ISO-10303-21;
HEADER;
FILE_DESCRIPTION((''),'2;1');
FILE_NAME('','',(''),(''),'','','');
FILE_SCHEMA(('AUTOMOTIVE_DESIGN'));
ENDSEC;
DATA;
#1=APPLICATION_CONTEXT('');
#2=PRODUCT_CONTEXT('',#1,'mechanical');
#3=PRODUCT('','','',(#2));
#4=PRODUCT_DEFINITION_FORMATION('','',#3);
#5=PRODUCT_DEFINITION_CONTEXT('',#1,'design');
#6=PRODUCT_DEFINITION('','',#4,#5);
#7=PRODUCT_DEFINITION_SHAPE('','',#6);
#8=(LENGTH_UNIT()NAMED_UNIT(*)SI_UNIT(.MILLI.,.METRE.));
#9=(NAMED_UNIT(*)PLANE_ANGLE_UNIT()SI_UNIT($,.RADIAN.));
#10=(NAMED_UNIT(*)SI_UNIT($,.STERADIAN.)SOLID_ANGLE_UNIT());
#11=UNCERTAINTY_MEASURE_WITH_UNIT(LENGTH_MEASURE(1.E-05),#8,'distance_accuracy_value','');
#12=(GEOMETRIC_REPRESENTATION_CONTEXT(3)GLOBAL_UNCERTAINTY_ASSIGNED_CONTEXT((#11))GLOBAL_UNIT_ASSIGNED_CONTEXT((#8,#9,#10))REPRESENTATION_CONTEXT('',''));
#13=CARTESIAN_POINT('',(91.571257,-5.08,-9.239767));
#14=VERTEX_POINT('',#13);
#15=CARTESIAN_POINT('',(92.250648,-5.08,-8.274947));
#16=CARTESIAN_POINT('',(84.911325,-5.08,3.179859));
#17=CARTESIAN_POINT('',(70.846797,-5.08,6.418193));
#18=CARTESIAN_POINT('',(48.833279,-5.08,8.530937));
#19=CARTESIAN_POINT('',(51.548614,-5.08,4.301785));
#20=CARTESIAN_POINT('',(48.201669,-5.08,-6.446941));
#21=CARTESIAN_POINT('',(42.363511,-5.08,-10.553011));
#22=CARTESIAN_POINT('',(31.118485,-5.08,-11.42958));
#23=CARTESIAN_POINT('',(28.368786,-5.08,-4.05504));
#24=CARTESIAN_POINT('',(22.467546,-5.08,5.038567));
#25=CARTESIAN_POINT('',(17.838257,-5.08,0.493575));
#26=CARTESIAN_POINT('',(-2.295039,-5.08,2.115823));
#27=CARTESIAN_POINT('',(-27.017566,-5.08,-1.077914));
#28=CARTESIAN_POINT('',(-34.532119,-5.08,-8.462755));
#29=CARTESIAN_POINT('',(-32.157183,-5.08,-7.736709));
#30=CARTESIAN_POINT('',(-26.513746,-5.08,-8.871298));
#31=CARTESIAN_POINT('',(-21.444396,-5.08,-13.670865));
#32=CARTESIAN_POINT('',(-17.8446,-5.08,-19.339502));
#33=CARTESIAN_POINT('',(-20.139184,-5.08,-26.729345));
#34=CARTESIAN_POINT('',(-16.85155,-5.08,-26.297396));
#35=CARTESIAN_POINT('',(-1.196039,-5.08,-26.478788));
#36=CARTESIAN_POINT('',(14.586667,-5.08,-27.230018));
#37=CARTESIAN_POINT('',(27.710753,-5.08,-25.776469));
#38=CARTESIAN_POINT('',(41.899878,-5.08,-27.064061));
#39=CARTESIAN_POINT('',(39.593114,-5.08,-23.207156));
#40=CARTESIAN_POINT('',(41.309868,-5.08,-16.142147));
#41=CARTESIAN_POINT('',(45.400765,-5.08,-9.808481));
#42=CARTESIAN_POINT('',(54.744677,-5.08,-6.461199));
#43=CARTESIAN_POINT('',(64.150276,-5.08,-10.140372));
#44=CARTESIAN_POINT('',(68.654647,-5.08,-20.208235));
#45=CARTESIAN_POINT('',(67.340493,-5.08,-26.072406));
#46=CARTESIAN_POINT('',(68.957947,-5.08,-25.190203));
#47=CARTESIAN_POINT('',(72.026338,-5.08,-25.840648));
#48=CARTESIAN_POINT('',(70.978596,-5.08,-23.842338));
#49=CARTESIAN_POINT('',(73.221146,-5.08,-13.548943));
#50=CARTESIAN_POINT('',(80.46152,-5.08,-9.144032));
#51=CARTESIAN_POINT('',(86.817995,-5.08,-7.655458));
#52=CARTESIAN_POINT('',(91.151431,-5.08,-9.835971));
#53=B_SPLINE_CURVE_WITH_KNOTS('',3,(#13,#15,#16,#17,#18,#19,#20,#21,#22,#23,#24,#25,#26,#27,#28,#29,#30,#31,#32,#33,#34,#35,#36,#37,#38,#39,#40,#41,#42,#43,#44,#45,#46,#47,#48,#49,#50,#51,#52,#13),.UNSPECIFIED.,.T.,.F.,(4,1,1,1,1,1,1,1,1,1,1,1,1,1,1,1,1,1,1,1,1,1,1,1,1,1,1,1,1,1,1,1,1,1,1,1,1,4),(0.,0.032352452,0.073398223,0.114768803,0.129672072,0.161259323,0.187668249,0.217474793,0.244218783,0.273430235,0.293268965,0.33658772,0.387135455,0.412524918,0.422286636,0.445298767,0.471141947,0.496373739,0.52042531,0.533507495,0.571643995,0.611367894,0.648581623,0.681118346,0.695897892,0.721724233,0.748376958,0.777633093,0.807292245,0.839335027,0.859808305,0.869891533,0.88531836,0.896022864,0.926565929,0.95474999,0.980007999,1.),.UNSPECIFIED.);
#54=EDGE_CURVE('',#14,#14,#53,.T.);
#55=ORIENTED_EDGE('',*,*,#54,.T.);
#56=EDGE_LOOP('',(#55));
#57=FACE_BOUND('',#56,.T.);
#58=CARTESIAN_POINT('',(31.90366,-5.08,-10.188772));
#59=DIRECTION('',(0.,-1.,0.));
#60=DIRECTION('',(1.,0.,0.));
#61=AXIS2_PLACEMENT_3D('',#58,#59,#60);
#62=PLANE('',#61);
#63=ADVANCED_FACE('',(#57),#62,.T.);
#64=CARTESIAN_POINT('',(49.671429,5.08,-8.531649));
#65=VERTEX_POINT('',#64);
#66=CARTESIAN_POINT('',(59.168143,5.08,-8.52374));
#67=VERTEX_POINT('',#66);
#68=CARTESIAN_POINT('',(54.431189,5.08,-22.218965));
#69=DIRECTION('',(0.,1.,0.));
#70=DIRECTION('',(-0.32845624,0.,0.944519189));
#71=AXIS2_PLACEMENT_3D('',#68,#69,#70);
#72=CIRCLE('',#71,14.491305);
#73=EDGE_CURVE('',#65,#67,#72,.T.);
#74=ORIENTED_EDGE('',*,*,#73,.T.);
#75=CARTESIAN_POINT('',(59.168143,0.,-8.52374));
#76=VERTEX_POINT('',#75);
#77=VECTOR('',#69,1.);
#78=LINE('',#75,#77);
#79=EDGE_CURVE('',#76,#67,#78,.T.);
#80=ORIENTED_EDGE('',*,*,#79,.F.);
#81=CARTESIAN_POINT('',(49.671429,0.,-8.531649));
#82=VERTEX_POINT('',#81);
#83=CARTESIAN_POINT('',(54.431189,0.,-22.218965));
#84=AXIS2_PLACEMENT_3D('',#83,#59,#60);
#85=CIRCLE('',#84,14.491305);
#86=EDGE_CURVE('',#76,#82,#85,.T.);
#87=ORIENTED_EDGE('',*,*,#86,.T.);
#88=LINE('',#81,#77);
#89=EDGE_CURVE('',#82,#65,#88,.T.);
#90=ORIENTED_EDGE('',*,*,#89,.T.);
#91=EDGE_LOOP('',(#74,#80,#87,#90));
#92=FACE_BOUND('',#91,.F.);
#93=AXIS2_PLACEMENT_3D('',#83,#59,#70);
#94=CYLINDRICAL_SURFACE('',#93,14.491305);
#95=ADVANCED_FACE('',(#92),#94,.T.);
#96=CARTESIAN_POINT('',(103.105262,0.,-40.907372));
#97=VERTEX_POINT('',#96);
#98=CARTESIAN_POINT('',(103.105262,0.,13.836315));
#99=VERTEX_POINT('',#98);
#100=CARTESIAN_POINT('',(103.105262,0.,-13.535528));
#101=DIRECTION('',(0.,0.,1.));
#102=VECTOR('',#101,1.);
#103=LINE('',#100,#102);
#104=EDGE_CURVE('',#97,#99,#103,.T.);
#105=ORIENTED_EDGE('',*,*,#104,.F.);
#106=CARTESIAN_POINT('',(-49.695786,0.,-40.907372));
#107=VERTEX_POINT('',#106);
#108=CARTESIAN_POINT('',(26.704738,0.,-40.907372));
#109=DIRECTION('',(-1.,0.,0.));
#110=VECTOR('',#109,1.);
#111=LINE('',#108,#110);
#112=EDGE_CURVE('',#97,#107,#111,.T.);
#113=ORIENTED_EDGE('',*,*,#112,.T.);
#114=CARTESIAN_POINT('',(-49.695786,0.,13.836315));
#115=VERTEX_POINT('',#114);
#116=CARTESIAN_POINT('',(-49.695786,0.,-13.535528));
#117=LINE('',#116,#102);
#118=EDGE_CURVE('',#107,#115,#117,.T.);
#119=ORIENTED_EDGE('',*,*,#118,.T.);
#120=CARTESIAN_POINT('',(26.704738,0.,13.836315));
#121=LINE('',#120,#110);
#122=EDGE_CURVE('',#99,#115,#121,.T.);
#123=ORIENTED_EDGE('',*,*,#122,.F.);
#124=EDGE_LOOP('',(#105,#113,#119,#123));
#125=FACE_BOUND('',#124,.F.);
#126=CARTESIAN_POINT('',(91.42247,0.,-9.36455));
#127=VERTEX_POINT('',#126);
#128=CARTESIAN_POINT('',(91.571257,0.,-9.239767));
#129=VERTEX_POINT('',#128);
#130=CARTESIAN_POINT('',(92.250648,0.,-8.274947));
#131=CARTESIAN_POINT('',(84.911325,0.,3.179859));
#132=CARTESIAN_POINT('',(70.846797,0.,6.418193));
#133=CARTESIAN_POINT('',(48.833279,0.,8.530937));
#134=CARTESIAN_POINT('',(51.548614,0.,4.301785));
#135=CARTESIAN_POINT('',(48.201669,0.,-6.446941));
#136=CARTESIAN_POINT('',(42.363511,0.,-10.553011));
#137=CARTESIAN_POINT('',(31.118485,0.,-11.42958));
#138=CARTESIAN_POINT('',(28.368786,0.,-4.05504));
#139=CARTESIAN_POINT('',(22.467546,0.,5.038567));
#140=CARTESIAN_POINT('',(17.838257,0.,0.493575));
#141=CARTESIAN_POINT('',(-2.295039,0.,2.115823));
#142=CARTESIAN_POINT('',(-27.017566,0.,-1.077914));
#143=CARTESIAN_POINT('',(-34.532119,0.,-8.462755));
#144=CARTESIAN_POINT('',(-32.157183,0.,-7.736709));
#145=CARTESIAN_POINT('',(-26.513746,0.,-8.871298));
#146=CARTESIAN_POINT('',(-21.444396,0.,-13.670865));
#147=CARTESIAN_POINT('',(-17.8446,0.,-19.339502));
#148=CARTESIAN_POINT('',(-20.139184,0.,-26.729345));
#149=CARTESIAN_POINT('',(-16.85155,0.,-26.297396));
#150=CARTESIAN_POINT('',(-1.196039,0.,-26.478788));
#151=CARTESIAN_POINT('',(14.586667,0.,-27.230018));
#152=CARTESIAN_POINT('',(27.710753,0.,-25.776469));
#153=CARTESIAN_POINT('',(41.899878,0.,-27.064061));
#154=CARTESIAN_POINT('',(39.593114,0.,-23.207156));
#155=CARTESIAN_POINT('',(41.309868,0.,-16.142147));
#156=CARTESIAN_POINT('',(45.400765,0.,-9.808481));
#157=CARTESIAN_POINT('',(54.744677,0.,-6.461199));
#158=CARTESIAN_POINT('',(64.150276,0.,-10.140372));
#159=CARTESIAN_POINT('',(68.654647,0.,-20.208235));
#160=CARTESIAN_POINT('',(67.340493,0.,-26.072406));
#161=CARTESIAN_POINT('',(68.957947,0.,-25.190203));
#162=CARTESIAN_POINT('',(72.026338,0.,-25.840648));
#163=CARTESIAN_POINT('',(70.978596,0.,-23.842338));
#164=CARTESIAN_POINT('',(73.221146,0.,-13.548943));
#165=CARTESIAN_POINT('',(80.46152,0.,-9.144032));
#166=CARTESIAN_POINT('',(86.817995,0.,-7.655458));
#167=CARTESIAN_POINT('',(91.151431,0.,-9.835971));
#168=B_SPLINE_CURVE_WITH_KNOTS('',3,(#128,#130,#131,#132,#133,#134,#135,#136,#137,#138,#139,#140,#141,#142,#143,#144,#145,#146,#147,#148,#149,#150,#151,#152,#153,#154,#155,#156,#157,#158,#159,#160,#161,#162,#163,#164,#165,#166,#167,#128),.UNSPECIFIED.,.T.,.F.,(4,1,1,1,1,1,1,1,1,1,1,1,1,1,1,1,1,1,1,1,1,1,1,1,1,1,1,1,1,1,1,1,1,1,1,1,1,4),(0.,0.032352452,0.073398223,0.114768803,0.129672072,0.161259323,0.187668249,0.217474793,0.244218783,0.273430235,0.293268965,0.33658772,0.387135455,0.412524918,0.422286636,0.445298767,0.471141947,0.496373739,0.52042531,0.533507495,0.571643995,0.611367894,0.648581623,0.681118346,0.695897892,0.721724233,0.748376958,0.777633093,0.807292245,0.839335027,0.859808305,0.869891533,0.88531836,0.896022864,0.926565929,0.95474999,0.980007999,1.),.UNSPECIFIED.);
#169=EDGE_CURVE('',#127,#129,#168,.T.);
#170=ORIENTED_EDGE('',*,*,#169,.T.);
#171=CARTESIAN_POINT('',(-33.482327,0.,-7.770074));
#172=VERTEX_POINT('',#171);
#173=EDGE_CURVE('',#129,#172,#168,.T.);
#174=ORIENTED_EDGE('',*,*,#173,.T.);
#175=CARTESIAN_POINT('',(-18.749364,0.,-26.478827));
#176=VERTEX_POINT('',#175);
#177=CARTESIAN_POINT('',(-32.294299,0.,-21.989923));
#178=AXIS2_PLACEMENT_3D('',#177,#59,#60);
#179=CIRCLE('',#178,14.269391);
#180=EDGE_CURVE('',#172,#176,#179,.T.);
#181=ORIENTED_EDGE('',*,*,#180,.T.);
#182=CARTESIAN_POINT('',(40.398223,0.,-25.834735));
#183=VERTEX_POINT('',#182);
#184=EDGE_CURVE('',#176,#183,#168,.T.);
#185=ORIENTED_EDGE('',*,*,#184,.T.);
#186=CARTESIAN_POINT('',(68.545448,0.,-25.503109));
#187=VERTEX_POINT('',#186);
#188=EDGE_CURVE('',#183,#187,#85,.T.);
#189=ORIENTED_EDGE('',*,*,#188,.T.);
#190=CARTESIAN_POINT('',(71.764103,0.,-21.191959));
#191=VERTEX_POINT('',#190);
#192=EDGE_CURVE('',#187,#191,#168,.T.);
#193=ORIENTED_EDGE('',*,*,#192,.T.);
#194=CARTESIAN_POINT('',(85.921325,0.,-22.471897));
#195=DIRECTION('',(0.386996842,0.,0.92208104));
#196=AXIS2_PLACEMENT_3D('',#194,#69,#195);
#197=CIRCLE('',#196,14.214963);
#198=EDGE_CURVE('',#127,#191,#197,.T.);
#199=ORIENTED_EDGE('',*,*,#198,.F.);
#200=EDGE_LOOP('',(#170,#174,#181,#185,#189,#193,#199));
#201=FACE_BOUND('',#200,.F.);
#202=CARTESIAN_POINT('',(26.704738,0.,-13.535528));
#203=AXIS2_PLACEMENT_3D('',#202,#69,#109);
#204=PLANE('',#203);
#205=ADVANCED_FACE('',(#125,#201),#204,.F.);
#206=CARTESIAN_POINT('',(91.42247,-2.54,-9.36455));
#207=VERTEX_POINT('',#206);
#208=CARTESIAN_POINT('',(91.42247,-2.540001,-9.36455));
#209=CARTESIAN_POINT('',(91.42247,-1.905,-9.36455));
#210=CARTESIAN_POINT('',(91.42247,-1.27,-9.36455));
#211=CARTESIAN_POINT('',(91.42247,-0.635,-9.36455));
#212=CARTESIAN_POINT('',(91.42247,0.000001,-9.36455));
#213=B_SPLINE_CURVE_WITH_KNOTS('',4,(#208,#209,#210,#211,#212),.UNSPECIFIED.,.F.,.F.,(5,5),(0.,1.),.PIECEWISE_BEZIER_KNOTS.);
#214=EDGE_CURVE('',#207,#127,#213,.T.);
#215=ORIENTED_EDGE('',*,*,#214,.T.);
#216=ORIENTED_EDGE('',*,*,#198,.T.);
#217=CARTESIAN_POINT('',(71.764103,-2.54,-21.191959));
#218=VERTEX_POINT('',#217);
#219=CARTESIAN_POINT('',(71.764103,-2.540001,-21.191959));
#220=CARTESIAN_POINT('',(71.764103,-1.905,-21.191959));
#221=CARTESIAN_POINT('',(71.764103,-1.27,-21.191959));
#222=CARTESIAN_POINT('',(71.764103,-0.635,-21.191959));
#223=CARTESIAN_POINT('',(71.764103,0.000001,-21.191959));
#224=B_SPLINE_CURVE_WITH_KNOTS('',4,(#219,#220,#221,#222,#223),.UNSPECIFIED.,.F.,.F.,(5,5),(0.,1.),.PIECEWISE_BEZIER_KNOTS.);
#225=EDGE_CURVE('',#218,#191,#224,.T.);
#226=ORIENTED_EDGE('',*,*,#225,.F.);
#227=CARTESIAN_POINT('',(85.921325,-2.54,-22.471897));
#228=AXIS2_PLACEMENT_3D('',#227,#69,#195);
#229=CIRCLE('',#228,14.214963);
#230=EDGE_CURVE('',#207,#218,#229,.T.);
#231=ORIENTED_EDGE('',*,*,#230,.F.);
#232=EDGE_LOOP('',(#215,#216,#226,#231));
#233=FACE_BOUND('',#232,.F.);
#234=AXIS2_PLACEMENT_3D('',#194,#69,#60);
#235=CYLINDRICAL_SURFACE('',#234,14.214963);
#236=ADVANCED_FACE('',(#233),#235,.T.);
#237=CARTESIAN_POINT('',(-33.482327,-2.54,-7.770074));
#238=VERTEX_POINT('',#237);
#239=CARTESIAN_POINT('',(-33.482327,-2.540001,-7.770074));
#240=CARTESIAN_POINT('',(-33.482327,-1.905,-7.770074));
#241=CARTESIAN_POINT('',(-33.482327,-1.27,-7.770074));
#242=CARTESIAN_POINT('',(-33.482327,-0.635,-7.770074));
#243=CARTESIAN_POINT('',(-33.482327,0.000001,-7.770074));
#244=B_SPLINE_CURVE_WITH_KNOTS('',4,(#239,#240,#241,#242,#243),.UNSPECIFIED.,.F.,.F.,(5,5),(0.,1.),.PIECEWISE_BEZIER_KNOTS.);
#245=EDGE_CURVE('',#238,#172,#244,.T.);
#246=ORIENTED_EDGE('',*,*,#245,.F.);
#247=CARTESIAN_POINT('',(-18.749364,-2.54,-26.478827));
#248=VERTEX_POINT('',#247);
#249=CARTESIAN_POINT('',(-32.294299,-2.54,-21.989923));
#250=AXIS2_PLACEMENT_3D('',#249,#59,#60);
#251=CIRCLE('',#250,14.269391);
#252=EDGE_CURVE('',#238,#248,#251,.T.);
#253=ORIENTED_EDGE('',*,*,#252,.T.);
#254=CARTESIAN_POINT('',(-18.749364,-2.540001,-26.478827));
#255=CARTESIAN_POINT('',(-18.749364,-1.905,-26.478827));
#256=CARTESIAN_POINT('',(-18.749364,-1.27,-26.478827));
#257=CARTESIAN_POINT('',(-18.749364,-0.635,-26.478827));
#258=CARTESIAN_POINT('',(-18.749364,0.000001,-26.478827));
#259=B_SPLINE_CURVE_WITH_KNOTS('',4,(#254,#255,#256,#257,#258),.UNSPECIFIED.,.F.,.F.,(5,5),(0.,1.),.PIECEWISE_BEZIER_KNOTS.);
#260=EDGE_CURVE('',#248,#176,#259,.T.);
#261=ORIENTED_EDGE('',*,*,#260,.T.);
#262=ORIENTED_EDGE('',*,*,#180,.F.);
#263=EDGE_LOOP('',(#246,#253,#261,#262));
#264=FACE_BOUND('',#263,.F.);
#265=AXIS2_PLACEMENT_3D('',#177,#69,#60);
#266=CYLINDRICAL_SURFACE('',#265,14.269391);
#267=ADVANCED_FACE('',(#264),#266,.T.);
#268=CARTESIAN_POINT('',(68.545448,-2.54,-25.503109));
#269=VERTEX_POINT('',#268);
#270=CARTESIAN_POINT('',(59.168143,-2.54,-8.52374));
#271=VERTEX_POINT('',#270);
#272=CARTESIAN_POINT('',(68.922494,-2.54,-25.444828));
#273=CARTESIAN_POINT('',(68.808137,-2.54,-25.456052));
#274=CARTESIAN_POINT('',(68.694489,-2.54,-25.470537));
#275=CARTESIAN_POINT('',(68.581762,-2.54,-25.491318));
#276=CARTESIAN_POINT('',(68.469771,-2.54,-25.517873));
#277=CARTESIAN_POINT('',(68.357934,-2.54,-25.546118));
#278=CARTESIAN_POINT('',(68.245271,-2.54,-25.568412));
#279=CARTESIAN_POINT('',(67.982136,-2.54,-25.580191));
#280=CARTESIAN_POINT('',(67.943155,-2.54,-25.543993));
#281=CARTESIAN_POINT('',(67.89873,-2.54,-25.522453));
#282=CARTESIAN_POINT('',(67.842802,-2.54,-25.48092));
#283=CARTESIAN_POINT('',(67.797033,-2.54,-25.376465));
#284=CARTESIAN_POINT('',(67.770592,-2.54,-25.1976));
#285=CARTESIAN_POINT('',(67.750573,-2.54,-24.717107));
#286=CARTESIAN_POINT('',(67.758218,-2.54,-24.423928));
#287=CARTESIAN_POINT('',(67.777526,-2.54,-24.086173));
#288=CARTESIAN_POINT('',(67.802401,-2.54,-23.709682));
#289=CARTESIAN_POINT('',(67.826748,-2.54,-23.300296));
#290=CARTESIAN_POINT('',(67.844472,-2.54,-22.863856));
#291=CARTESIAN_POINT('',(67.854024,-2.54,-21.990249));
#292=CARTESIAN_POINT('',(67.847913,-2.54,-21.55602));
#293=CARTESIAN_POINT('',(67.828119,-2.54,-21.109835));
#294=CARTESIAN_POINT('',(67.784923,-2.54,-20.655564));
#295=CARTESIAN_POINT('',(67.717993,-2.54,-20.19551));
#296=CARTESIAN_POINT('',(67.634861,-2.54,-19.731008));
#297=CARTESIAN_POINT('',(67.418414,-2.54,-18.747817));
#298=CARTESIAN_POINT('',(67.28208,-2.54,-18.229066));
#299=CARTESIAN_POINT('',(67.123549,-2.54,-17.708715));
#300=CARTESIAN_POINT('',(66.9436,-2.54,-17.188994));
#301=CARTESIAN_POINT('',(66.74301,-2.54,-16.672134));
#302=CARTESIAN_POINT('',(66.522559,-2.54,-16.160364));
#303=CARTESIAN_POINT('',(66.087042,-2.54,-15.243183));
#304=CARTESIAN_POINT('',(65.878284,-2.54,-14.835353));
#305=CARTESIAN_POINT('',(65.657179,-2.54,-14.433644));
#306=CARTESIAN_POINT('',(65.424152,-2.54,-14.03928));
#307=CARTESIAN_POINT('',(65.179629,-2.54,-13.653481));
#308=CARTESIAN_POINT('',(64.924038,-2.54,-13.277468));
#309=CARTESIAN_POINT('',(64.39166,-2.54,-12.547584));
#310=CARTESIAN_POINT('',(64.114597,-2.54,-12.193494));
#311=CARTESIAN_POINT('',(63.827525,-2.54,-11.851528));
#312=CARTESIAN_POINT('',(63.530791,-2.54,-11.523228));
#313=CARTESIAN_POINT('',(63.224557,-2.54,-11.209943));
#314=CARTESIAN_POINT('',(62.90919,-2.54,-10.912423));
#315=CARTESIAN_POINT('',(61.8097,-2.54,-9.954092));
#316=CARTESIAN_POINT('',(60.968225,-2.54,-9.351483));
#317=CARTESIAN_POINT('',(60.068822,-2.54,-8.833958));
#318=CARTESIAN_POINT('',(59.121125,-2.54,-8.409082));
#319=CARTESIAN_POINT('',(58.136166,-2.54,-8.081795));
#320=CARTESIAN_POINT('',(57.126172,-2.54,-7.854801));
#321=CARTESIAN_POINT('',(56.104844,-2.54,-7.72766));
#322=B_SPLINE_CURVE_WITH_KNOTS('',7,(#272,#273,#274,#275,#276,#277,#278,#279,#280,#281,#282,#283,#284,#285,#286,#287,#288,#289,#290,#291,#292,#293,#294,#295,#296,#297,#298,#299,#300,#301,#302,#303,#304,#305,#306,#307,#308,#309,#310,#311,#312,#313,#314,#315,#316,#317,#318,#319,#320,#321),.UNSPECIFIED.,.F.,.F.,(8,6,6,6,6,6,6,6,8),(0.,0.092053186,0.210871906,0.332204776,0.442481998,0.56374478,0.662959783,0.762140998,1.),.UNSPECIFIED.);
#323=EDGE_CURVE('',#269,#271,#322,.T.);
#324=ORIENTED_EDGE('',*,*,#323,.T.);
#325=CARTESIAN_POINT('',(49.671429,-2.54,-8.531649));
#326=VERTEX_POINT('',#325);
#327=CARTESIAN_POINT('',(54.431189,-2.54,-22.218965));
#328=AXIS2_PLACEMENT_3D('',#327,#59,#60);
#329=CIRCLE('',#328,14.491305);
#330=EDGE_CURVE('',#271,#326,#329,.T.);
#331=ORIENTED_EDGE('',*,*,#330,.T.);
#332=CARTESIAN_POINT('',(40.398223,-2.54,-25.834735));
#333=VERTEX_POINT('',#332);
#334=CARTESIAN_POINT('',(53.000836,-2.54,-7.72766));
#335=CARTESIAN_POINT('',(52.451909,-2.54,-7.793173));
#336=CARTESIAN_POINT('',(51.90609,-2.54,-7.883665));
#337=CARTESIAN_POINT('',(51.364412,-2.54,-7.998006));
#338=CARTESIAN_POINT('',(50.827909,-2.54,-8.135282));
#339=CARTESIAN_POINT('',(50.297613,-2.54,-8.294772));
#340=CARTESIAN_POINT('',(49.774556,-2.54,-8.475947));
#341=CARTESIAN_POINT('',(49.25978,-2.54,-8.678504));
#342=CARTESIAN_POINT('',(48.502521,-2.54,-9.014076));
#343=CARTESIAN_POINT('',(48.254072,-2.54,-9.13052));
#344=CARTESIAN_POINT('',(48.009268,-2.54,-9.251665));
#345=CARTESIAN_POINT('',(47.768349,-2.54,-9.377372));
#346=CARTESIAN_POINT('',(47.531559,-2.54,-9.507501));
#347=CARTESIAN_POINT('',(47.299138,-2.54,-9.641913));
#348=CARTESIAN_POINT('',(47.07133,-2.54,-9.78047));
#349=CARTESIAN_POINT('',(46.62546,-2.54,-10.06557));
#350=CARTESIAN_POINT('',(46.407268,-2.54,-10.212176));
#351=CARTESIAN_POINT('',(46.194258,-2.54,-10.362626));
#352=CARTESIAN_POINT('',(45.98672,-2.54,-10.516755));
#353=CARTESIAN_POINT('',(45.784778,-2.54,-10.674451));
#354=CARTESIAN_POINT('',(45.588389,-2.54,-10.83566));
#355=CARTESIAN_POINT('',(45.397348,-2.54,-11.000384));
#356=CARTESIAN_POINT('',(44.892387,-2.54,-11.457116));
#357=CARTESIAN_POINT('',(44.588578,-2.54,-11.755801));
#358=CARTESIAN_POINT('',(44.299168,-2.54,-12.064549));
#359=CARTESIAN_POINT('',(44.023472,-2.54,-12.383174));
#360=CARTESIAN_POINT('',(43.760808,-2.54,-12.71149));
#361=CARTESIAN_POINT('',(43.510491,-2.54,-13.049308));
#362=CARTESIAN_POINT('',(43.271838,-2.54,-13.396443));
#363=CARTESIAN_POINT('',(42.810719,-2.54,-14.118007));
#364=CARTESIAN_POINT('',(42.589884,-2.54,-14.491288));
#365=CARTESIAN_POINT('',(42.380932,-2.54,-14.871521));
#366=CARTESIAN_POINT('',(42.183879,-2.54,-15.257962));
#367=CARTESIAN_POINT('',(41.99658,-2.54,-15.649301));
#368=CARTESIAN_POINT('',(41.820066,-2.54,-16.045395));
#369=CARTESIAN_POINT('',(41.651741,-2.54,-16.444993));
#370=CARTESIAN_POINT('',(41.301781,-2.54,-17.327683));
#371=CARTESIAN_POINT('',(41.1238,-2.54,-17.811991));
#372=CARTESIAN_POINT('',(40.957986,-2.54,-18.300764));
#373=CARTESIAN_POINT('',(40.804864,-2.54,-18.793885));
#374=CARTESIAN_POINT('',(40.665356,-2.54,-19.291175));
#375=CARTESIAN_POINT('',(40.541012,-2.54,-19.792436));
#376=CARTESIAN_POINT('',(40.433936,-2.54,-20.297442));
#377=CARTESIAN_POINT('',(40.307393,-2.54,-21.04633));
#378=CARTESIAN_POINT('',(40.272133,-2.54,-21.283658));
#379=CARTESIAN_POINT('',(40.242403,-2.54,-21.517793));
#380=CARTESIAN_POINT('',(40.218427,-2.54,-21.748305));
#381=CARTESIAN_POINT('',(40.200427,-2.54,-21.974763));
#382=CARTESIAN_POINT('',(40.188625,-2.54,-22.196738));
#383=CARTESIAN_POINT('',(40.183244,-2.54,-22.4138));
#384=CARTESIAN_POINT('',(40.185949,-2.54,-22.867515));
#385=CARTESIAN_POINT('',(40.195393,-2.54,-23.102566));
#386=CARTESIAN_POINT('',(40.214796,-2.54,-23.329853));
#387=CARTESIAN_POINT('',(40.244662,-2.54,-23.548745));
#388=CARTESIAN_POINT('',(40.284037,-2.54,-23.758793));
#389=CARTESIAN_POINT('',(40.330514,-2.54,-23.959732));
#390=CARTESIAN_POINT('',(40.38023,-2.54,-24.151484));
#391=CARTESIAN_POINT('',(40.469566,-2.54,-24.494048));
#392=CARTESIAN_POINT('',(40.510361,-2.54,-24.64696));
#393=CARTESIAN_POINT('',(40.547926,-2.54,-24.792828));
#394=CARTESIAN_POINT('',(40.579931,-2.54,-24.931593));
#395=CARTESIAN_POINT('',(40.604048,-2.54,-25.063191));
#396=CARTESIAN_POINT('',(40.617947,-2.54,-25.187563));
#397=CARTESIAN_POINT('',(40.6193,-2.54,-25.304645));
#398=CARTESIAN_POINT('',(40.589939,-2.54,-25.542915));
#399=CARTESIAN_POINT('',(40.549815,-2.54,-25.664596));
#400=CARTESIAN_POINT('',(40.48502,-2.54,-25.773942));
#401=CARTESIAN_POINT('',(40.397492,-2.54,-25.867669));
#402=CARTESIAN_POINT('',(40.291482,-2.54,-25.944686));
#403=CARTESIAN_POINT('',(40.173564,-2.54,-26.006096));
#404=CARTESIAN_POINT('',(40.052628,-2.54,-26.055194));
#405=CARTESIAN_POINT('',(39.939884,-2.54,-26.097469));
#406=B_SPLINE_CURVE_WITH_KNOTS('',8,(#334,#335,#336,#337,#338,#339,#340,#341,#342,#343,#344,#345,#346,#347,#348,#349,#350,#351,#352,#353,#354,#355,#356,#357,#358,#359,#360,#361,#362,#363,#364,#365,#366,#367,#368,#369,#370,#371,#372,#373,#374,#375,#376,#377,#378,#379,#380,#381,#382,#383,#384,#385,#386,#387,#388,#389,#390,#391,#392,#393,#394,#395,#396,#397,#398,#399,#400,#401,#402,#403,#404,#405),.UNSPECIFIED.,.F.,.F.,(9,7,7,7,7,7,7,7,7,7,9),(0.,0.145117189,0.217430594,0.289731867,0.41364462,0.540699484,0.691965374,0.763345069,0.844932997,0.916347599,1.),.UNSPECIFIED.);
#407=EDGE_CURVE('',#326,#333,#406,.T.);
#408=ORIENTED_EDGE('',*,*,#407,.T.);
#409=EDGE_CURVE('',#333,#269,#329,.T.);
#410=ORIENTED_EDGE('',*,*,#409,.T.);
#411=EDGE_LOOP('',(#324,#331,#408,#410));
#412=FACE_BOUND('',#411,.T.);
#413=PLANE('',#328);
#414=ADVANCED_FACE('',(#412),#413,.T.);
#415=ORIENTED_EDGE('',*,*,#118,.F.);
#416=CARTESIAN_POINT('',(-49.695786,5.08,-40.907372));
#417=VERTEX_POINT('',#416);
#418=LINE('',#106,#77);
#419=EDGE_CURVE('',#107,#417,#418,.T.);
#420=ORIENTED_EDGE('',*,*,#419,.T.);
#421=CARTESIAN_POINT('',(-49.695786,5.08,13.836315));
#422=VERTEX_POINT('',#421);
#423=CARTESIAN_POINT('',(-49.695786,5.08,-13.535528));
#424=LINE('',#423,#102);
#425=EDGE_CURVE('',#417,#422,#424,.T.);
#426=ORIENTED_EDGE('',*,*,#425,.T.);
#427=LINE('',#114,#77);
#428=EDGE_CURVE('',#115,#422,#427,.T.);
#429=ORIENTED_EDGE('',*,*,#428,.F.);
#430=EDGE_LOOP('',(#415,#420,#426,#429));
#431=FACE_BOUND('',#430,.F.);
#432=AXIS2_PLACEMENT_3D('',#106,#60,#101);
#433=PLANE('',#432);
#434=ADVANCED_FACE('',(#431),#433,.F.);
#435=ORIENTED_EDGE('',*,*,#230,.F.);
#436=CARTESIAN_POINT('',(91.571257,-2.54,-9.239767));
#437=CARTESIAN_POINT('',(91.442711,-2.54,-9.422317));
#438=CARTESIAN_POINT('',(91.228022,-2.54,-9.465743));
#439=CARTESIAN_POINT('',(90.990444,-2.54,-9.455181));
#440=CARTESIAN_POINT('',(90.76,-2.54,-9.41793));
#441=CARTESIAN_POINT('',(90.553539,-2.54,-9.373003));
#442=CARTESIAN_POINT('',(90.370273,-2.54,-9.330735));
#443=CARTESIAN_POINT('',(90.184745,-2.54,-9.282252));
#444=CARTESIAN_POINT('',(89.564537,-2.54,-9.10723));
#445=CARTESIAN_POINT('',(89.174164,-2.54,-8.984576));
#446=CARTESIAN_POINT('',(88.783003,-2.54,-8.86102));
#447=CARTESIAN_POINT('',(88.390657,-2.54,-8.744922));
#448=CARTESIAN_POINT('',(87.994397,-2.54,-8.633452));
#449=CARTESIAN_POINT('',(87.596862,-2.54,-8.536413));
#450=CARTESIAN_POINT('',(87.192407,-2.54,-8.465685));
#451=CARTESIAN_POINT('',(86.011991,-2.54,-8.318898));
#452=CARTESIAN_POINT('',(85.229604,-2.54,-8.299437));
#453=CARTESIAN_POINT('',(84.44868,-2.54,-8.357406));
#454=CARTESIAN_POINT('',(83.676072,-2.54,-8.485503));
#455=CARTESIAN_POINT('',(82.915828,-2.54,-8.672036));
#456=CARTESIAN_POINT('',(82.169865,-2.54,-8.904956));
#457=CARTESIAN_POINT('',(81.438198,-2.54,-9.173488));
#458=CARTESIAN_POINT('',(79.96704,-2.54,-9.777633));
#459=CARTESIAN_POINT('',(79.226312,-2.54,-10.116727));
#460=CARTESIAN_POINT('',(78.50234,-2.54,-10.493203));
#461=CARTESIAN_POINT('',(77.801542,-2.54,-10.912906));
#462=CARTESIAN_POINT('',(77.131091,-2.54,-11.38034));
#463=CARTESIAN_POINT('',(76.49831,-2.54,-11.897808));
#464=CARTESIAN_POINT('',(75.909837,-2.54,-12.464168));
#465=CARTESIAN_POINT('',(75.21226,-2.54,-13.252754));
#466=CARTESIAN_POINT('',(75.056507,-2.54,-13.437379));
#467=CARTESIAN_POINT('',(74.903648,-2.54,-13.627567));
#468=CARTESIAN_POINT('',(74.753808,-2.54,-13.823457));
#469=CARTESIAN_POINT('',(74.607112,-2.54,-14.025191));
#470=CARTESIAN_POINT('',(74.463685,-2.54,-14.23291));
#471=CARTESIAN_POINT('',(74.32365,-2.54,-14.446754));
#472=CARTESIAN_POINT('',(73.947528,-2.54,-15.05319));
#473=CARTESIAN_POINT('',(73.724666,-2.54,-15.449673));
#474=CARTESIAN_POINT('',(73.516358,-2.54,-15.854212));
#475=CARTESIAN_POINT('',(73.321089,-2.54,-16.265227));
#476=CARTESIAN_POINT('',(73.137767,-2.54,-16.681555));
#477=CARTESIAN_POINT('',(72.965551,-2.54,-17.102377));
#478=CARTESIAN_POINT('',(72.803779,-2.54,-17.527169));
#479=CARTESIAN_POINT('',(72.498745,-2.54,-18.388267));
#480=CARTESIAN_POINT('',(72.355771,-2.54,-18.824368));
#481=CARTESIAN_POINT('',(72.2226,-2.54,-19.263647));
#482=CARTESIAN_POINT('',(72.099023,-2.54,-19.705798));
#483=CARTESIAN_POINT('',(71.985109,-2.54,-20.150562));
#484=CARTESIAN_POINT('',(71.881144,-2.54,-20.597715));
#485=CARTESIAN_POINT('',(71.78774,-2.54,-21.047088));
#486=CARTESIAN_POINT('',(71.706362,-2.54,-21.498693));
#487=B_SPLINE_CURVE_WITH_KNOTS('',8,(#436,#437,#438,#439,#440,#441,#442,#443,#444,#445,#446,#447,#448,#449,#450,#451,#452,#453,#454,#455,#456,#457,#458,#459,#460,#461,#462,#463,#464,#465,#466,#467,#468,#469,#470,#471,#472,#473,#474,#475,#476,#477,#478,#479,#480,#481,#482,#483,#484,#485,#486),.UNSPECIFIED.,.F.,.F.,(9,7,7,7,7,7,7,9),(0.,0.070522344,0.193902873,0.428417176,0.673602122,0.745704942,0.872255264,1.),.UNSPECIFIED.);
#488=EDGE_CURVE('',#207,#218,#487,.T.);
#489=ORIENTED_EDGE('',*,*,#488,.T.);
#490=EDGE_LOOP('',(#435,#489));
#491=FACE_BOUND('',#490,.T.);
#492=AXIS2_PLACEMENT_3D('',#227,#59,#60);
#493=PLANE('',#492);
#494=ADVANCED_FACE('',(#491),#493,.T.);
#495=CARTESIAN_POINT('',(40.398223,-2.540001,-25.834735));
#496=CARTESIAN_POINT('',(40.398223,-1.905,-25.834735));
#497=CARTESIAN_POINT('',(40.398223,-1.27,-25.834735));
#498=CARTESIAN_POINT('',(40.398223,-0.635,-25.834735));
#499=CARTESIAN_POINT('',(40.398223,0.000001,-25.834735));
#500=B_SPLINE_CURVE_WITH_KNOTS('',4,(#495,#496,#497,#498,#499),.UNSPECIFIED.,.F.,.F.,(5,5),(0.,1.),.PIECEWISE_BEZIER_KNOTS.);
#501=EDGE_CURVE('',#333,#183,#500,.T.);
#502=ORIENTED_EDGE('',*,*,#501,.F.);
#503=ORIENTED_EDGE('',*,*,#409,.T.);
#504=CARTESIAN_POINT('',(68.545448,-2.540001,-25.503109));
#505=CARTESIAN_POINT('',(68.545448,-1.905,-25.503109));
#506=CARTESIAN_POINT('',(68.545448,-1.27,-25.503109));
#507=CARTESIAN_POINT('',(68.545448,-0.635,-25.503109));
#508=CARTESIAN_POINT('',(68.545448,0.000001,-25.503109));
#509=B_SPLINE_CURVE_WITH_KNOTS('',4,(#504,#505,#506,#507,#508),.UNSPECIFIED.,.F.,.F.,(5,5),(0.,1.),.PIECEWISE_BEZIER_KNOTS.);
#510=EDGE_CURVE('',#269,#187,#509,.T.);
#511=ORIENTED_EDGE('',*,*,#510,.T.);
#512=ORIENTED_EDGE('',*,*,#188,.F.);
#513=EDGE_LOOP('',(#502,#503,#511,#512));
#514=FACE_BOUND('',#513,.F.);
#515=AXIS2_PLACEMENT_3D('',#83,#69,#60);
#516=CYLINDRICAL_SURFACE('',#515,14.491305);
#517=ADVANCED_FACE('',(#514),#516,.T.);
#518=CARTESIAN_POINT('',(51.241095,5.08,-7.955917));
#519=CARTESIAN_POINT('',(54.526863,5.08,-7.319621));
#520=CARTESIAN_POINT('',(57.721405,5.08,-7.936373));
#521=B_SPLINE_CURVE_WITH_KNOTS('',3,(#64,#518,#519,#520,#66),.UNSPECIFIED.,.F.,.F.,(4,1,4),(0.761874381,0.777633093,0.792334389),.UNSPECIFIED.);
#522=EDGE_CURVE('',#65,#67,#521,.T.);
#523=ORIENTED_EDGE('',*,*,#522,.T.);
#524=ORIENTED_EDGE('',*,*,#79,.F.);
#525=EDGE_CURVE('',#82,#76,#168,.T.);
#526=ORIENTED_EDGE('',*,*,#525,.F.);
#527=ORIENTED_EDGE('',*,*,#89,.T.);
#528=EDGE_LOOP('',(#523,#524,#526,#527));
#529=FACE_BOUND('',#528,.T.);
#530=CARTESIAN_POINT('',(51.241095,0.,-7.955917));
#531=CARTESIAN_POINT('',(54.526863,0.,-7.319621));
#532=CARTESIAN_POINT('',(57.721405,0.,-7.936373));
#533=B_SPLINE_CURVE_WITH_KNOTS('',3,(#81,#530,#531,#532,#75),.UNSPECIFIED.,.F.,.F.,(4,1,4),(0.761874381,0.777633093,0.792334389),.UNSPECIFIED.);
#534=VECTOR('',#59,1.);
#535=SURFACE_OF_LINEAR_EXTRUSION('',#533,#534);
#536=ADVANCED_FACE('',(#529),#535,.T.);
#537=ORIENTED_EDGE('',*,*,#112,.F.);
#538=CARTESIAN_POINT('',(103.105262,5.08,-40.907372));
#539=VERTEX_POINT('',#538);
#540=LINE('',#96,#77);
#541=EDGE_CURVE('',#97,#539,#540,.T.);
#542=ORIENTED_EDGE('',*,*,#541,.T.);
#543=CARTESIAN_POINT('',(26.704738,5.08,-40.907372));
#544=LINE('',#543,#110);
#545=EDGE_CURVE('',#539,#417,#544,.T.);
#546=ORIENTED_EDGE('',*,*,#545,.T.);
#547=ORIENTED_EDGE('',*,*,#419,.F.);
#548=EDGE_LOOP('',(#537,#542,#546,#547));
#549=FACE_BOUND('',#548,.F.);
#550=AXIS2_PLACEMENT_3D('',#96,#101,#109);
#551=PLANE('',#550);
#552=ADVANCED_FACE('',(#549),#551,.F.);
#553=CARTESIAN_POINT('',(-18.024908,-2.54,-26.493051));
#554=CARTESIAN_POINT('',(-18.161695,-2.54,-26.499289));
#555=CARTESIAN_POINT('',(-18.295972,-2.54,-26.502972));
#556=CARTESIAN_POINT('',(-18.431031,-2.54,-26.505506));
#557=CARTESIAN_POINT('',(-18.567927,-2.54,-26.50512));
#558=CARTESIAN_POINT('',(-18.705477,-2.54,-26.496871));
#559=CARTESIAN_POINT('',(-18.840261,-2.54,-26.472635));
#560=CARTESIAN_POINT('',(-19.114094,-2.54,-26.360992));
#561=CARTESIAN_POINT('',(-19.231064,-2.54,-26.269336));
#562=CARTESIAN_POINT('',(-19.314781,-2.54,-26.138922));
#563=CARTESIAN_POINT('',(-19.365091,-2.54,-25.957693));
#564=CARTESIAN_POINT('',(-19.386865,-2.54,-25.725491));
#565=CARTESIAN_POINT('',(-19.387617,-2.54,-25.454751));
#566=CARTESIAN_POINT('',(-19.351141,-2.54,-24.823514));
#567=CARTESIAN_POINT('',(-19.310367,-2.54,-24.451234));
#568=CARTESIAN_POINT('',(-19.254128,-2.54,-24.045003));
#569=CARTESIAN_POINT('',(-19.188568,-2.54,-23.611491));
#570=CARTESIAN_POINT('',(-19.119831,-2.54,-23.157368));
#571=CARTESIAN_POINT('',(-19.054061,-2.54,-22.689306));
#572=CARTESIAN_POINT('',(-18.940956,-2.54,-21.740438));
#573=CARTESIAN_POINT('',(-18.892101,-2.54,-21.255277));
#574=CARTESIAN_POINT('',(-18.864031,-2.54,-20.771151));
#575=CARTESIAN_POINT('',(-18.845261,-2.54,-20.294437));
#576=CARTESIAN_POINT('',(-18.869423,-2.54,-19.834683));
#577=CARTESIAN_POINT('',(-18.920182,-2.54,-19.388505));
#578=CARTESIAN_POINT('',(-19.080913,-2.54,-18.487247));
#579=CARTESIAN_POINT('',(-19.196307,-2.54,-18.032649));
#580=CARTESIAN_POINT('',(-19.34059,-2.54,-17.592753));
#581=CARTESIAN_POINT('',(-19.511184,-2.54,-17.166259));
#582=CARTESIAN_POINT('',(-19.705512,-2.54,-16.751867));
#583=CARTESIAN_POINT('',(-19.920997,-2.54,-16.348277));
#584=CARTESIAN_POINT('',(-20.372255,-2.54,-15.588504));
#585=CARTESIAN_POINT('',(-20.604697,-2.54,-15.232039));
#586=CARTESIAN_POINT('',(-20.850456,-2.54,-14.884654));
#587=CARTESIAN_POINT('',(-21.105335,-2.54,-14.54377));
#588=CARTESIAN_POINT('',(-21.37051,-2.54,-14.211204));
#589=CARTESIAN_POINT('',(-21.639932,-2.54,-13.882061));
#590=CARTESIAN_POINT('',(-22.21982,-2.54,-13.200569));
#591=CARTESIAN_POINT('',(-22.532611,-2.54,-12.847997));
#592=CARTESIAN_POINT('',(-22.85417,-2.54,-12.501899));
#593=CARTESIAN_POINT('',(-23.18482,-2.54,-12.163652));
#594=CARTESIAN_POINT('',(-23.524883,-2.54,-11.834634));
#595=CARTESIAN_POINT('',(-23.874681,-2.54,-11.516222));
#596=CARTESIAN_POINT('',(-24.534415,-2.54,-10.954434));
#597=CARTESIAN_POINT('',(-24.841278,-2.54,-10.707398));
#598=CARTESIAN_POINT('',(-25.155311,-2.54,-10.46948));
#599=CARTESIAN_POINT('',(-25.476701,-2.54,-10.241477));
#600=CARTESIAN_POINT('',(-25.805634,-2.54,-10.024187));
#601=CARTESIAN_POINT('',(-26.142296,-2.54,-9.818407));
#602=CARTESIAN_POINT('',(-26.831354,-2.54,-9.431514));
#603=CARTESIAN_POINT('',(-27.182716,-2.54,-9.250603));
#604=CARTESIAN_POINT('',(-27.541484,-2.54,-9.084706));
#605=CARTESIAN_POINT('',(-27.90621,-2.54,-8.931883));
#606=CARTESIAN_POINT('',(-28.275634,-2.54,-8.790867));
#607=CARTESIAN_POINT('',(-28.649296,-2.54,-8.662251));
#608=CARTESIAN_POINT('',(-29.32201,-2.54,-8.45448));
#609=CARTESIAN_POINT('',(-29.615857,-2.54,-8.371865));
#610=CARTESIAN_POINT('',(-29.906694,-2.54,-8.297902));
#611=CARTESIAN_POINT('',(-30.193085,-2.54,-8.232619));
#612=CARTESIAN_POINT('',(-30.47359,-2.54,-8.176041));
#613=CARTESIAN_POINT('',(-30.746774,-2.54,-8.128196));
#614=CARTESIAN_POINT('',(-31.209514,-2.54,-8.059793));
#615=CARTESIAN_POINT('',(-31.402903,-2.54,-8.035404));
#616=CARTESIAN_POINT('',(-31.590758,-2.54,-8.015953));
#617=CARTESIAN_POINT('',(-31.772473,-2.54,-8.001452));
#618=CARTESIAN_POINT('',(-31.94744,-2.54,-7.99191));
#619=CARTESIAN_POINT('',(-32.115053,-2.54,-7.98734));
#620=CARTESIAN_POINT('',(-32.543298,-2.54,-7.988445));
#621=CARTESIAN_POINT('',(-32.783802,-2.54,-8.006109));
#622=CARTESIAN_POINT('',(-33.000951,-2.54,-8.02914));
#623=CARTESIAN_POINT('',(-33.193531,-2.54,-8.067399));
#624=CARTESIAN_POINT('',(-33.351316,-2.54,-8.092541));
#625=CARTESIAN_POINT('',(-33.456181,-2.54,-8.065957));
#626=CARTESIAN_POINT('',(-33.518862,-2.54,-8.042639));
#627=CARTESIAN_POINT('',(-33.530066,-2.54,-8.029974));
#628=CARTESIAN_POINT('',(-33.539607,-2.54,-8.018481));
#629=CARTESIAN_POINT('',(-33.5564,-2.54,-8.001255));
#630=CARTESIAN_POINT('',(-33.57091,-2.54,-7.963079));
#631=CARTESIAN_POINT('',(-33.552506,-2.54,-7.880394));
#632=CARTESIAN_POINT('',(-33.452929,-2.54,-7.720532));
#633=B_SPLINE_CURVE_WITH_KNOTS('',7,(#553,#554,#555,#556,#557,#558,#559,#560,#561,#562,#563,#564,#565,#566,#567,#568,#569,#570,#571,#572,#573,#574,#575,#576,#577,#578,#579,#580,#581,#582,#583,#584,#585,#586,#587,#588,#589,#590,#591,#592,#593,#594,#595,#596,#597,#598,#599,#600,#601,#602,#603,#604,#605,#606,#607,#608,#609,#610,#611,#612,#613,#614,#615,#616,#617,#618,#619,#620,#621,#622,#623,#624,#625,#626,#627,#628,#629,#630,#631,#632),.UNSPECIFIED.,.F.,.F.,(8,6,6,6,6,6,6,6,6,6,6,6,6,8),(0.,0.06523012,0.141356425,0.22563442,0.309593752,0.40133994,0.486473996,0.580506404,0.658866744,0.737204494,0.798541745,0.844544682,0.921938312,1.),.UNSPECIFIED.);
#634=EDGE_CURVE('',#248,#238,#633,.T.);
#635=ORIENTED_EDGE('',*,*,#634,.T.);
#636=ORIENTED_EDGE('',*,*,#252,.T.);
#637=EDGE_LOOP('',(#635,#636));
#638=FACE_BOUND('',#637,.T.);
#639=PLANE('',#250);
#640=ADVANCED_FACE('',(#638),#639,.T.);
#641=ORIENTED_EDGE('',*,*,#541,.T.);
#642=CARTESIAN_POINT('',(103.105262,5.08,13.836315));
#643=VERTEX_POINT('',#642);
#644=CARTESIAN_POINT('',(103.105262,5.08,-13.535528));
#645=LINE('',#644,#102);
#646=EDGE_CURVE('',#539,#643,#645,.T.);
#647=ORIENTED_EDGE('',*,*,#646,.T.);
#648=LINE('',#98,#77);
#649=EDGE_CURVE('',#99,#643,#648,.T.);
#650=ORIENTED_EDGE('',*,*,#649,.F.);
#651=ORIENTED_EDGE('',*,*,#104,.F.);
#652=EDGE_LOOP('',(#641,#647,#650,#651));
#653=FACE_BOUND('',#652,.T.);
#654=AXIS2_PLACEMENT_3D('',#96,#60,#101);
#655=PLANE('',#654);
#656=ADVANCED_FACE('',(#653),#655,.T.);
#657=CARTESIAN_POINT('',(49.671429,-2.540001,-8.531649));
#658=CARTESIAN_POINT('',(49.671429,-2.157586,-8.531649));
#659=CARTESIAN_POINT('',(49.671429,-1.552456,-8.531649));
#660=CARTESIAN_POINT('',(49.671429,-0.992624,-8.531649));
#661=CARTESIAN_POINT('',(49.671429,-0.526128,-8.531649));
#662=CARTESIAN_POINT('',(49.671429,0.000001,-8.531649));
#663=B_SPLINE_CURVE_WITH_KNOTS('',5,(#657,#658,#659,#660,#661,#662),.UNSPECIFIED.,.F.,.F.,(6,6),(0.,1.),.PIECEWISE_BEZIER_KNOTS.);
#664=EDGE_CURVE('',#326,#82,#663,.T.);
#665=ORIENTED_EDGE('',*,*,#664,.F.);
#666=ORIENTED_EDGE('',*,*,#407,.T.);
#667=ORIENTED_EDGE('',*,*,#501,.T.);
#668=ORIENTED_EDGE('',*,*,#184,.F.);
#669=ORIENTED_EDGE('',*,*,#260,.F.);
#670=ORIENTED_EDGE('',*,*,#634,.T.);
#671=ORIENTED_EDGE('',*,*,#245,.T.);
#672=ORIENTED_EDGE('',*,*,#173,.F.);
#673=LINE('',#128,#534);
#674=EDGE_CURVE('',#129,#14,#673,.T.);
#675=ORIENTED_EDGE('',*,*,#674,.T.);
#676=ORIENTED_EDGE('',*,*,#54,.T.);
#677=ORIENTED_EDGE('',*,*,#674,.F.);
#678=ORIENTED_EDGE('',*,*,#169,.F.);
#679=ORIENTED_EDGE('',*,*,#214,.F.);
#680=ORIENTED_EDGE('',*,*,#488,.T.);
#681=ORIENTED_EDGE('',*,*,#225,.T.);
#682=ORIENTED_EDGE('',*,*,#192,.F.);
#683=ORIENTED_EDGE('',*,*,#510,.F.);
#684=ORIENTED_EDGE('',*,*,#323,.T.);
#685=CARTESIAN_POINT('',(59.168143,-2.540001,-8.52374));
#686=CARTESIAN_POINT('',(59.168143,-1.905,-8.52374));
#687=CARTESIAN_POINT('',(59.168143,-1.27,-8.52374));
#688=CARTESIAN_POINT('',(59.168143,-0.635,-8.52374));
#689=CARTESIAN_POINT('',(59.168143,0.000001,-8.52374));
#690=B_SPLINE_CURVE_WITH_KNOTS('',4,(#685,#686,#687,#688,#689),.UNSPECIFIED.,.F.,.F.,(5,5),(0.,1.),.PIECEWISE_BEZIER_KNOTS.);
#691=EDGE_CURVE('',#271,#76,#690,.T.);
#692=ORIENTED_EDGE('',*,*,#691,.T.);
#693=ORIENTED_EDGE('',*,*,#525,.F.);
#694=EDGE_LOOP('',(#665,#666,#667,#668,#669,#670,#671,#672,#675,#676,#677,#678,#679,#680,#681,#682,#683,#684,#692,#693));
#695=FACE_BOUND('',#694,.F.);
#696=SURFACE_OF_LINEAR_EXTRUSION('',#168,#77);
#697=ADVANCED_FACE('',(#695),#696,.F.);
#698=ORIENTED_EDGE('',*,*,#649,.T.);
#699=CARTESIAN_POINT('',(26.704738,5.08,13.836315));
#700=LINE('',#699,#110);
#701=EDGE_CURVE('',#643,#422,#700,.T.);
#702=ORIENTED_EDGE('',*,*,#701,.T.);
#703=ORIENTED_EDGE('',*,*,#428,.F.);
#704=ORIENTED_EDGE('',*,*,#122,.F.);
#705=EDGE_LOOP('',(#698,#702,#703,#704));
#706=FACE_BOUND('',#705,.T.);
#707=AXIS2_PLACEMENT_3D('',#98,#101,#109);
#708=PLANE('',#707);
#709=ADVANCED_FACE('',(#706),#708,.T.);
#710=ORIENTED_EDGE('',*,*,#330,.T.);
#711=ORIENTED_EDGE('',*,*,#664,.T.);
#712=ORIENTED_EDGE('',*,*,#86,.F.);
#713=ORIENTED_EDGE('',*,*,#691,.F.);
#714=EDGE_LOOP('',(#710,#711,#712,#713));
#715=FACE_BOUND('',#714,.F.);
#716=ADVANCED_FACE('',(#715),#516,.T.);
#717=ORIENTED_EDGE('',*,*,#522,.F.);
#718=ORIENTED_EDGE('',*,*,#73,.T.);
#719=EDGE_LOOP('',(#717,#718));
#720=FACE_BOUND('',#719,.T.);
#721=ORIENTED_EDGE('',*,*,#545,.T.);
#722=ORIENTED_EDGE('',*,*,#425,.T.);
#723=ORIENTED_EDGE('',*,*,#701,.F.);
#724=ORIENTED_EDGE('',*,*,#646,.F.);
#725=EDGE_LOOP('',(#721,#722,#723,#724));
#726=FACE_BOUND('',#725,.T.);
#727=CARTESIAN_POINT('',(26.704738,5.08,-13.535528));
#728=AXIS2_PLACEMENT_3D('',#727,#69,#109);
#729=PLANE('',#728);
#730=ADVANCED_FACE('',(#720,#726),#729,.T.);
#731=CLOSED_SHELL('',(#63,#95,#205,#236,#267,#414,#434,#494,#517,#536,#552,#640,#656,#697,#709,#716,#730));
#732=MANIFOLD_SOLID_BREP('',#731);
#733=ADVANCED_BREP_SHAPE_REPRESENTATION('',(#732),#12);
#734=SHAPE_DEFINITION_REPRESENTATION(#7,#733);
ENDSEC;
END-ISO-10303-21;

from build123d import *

# Parameters (mm, degrees)
F1_DEPTH = 5.08
F2_R     = 14.2693911651
F2_R_2   = 14.4913050141
F2_R_3   = 14.2149626285
F3_DEPTH = 2.54
F4_W     = 152.8010480106
F4_H     = 54.7436866909
F5_DEPTH = 5.08


with BuildPart() as f1:
    # F0 (on Front) → F1 (new body)
    with BuildSketch(Plane.XZ):
        with BuildLine():
            add(Edge.make_bspline(
                [(91.5712565184, -9.2397667468), (92.2506480563, -8.2749470462), (84.9113245453, 3.1798594145), (70.8467974857, 6.4181927802), (48.8332787058, 8.5309369462), (51.5486143438, 4.3017852457), (48.2016691437, -6.4469408419), (42.3635108736, -10.5530108465), (31.1184852851, -11.4295798728), (28.3687855118, -4.0550399622), (22.4675463664, 5.0385674737), (17.8382568777, 0.4935749268), (-2.2950387326, 2.115822892), (-27.0175658443, -1.0779135774), (-34.5321187873, -8.4627553793), (-32.1571834004, -7.7367093188), (-26.5137455595, -8.87129833), (-21.4443960259, -13.6708651421), (-17.8445998546, -19.3395019887), (-20.1391841532, -26.7293454582), (-16.8515502737, -26.297396327), (-1.1960392938, -26.4787884568), (14.5866665398, -27.230017872), (27.7107531727, -25.7764686423), (41.8998775602, -27.064060779), (39.5931139928, -23.2071559851), (41.3098684942, -16.1421466789), (45.400764541, -9.8084807721), (54.744677355, -6.4611988974), (64.1502761137, -10.1403721367), (68.6546470421, -20.2082352415), (67.3404925327, -26.0724056416), (68.9579468969, -25.1902033019), (72.0263382532, -25.8406484035), (70.9785957414, -23.8423375175), (73.2211458732, -13.5489426008), (80.4615197177, -9.1440319937), (86.8179947956, -7.6554584837), (91.1514306429, -9.8359712222), (91.5712565184, -9.2397667468)],
                knots=[0, 0, 0, 0, 0.032352452, 0.0733982234, 0.1147688033, 0.1296720721, 0.161259323, 0.1876682491, 0.2174747927, 0.2442187833, 0.2734302346, 0.2932689645, 0.3365877203, 0.3871354552, 0.4125249184, 0.4222866357, 0.4452987666, 0.4711419471, 0.4963737391, 0.5204253105, 0.5335074952, 0.5716439954, 0.6113678944, 0.6485816228, 0.6811183455, 0.695897892, 0.7217242331, 0.7483769579, 0.7776330933, 0.8072922446, 0.8393350268, 0.8598083045, 0.8698915329, 0.8853183596, 0.8960228644, 0.9265659292, 0.9547499904, 0.9800079987, 1, 1, 1, 1], degree=3))
        make_face()
    extrude(amount=F1_DEPTH)

    # F2 (on Front) → F3 (join)
    with BuildSketch(Plane.XZ):
        with Locations((-32.2942994535, -21.9899229705)):
            Circle(F2_R)
        with Locations((54.4311888516, -22.218964994)):
            Circle(F2_R_2)
        with Locations((85.9213247895, -22.4718973041)):
            Circle(F2_R_3)
    extrude(amount=F3_DEPTH)

    # F4 (on face) → F5 (join)
    with BuildSketch(Plane(origin=(0, 0, 0), x_dir=(-1, 0, 0), z_dir=(0, 1, 0))):
        with Locations((-26.7047379166, -13.5355284438)):
            Rectangle(F4_W, F4_H)
        with BuildLine():
            ThreePointArc((-71.7641032696, -21.1919592722), (-93.2496135528, -34.6522645534), (-91.4224704366, -9.3645497807))
            add(Edge.make_bspline(
                [(-91.4224704366, -9.3645497807), (-91.483438431, -9.3345677033), (-91.5334184104, -9.2935015226), (-91.5712565184, -9.2397667468)],
                knots=[0.9981981589, 0.9981981589, 0.9981981589, 0.9981981589, 1, 1, 1, 1], degree=3))
            add(Edge.make_bspline(
                [(-91.5712565184, -9.2397667468), (-92.2506480563, -8.2749470462), (-84.9113245453, 3.1798594145), (-70.8467974857, 6.4181927802), (-48.8332787058, 8.5309369462), (-51.5486143438, 4.3017852457), (-48.2016691437, -6.4469408419), (-42.3635108736, -10.5530108465), (-31.1184852851, -11.4295798728), (-28.3687855118, -4.0550399622), (-22.4675463664, 5.0385674737), (-17.8382568777, 0.4935749268), (2.2950387326, 2.115822892), (26.3423706651, -0.9906896679), (33.0882654966, -7.0685434619), (33.4823266027, -7.7700736143)],
                knots=[0, 0, 0, 0, 0.032352452, 0.0733982234, 0.1147688033, 0.1296720721, 0.161259323, 0.1876682491, 0.2174747927, 0.2442187833, 0.2734302346, 0.2932689645, 0.3365877203, 0.3871354552, 0.4092679276, 0.4092679276, 0.4092679276, 0.4092679276], degree=3))
            ThreePointArc((33.4823266027, -7.7700736143), (43.5049039677, -30.8181657542), (18.7493643013, -26.4788266165))
            add(Edge.make_bspline(
                [(18.7493643013, -26.4788266165), (18.4519204543, -26.5260702022), (15.7860916045, -26.3097412334), (1.1960392938, -26.4787884568), (-14.5866665398, -27.230017872), (-27.6841155442, -25.7794188746), (-39.3444353452, -26.8321842659), (-40.3982232078, -25.8347354863)],
                knots=[0.5266145409, 0.5266145409, 0.5266145409, 0.5266145409, 0.5335074952, 0.5716439954, 0.6113678944, 0.6485816228, 0.6808961481, 0.6808961481, 0.6808961481, 0.6808961481], degree=3))
            ThreePointArc((-40.3982232078, -25.8347354863), (-54.6019115257, -36.7092643277), (-68.545448318, -25.5031088285))
            add(Edge.make_bspline(
                [(-68.545448318, -25.5031088284), (-68.6704321284, -25.4783833949), (-69.5702113673, -25.3199926212), (-72.0263382532, -25.8406484035), (-71.3341318036, -24.5204350229), (-71.5239070275, -22.4163817486), (-71.7641032696, -21.1919592722)],
                knots=[0.8670345301, 0.8670345301, 0.8670345301, 0.8670345301, 0.8698915329, 0.8853183596, 0.8960228644, 0.9073343036, 0.9073343036, 0.9073343036, 0.9073343036], degree=3))
        make_face(mode=Mode.SUBTRACT)
        with BuildLine():
            add(Edge.make_bspline(
                [(-91.4224704366, -9.3645497807), (-91.483438431, -9.3345677033), (-91.5334184104, -9.2935015226), (-91.5712565184, -9.2397667468)],
                knots=[0.9981981589, 0.9981981589, 0.9981981589, 0.9981981589, 1, 1, 1, 1], degree=3))
            ThreePointArc((-91.4224704366, -9.3645497807), (-93.2496135528, -34.6522645534), (-71.7641032696, -21.1919592722))
            add(Edge.make_bspline(
                [(-68.545448318, -25.5031088284), (-68.6704321284, -25.4783833949), (-69.5702113673, -25.3199926212), (-72.0263382532, -25.8406484035), (-71.3341318036, -24.5204350229), (-71.5239070275, -22.4163817486), (-71.7641032696, -21.1919592722)],
                knots=[0.8670345301, 0.8670345301, 0.8670345301, 0.8670345301, 0.8698915329, 0.8853183596, 0.8960228644, 0.9073343036, 0.9073343036, 0.9073343036, 0.9073343036], degree=3))
            ThreePointArc((-68.545448318, -25.5031088285), (-54.6019115257, -36.7092643277), (-40.3982232078, -25.8347354863))
            add(Edge.make_bspline(
                [(18.7493643013, -26.4788266165), (18.4519204543, -26.5260702022), (15.7860916045, -26.3097412334), (1.1960392938, -26.4787884568), (-14.5866665398, -27.230017872), (-27.6841155442, -25.7794188746), (-39.3444353452, -26.8321842659), (-40.3982232078, -25.8347354863)],
                knots=[0.5266145409, 0.5266145409, 0.5266145409, 0.5266145409, 0.5335074952, 0.5716439954, 0.6113678944, 0.6485816228, 0.6808961481, 0.6808961481, 0.6808961481, 0.6808961481], degree=3))
            ThreePointArc((18.7493643013, -26.4788266165), (43.5049039677, -30.8181657542), (33.4823266027, -7.7700736143))
            add(Edge.make_bspline(
                [(-91.5712565184, -9.2397667468), (-92.2506480563, -8.2749470462), (-84.9113245453, 3.1798594145), (-70.8467974857, 6.4181927802), (-48.8332787058, 8.5309369462), (-51.5486143438, 4.3017852457), (-48.2016691437, -6.4469408419), (-42.3635108736, -10.5530108465), (-31.1184852851, -11.4295798728), (-28.3687855118, -4.0550399622), (-22.4675463664, 5.0385674737), (-17.8382568777, 0.4935749268), (2.2950387326, 2.115822892), (26.3423706651, -0.9906896679), (33.0882654966, -7.0685434619), (33.4823266027, -7.7700736143)],
                knots=[0, 0, 0, 0, 0.032352452, 0.0733982234, 0.1147688033, 0.1296720721, 0.161259323, 0.1876682491, 0.2174747927, 0.2442187833, 0.2734302346, 0.2932689645, 0.3365877203, 0.3871354552, 0.4092679276, 0.4092679276, 0.4092679276, 0.4092679276], degree=3))
        make_face()
        with BuildLine():
            add(Edge.make_bspline(
                [(-49.6714292893, -8.531649336), (-51.2410951526, -7.9559168443), (-54.5268632955, -7.3196207082), (-57.7214051638, -7.9363725541), (-59.1681431159, -8.5237400849)],
                knots=[0.7618743813, 0.7618743813, 0.7618743813, 0.7618743813, 0.7776330933, 0.7923343894, 0.7923343894, 0.7923343894, 0.7923343894], degree=3))
            ThreePointArc((-49.6714292893, -8.531649336), (-54.4191199052, -7.7276650056), (-59.1681431159, -8.5237400849))
        make_face(mode=Mode.SUBTRACT)
    extrude(amount=F5_DEPTH)


solid = f1.part
